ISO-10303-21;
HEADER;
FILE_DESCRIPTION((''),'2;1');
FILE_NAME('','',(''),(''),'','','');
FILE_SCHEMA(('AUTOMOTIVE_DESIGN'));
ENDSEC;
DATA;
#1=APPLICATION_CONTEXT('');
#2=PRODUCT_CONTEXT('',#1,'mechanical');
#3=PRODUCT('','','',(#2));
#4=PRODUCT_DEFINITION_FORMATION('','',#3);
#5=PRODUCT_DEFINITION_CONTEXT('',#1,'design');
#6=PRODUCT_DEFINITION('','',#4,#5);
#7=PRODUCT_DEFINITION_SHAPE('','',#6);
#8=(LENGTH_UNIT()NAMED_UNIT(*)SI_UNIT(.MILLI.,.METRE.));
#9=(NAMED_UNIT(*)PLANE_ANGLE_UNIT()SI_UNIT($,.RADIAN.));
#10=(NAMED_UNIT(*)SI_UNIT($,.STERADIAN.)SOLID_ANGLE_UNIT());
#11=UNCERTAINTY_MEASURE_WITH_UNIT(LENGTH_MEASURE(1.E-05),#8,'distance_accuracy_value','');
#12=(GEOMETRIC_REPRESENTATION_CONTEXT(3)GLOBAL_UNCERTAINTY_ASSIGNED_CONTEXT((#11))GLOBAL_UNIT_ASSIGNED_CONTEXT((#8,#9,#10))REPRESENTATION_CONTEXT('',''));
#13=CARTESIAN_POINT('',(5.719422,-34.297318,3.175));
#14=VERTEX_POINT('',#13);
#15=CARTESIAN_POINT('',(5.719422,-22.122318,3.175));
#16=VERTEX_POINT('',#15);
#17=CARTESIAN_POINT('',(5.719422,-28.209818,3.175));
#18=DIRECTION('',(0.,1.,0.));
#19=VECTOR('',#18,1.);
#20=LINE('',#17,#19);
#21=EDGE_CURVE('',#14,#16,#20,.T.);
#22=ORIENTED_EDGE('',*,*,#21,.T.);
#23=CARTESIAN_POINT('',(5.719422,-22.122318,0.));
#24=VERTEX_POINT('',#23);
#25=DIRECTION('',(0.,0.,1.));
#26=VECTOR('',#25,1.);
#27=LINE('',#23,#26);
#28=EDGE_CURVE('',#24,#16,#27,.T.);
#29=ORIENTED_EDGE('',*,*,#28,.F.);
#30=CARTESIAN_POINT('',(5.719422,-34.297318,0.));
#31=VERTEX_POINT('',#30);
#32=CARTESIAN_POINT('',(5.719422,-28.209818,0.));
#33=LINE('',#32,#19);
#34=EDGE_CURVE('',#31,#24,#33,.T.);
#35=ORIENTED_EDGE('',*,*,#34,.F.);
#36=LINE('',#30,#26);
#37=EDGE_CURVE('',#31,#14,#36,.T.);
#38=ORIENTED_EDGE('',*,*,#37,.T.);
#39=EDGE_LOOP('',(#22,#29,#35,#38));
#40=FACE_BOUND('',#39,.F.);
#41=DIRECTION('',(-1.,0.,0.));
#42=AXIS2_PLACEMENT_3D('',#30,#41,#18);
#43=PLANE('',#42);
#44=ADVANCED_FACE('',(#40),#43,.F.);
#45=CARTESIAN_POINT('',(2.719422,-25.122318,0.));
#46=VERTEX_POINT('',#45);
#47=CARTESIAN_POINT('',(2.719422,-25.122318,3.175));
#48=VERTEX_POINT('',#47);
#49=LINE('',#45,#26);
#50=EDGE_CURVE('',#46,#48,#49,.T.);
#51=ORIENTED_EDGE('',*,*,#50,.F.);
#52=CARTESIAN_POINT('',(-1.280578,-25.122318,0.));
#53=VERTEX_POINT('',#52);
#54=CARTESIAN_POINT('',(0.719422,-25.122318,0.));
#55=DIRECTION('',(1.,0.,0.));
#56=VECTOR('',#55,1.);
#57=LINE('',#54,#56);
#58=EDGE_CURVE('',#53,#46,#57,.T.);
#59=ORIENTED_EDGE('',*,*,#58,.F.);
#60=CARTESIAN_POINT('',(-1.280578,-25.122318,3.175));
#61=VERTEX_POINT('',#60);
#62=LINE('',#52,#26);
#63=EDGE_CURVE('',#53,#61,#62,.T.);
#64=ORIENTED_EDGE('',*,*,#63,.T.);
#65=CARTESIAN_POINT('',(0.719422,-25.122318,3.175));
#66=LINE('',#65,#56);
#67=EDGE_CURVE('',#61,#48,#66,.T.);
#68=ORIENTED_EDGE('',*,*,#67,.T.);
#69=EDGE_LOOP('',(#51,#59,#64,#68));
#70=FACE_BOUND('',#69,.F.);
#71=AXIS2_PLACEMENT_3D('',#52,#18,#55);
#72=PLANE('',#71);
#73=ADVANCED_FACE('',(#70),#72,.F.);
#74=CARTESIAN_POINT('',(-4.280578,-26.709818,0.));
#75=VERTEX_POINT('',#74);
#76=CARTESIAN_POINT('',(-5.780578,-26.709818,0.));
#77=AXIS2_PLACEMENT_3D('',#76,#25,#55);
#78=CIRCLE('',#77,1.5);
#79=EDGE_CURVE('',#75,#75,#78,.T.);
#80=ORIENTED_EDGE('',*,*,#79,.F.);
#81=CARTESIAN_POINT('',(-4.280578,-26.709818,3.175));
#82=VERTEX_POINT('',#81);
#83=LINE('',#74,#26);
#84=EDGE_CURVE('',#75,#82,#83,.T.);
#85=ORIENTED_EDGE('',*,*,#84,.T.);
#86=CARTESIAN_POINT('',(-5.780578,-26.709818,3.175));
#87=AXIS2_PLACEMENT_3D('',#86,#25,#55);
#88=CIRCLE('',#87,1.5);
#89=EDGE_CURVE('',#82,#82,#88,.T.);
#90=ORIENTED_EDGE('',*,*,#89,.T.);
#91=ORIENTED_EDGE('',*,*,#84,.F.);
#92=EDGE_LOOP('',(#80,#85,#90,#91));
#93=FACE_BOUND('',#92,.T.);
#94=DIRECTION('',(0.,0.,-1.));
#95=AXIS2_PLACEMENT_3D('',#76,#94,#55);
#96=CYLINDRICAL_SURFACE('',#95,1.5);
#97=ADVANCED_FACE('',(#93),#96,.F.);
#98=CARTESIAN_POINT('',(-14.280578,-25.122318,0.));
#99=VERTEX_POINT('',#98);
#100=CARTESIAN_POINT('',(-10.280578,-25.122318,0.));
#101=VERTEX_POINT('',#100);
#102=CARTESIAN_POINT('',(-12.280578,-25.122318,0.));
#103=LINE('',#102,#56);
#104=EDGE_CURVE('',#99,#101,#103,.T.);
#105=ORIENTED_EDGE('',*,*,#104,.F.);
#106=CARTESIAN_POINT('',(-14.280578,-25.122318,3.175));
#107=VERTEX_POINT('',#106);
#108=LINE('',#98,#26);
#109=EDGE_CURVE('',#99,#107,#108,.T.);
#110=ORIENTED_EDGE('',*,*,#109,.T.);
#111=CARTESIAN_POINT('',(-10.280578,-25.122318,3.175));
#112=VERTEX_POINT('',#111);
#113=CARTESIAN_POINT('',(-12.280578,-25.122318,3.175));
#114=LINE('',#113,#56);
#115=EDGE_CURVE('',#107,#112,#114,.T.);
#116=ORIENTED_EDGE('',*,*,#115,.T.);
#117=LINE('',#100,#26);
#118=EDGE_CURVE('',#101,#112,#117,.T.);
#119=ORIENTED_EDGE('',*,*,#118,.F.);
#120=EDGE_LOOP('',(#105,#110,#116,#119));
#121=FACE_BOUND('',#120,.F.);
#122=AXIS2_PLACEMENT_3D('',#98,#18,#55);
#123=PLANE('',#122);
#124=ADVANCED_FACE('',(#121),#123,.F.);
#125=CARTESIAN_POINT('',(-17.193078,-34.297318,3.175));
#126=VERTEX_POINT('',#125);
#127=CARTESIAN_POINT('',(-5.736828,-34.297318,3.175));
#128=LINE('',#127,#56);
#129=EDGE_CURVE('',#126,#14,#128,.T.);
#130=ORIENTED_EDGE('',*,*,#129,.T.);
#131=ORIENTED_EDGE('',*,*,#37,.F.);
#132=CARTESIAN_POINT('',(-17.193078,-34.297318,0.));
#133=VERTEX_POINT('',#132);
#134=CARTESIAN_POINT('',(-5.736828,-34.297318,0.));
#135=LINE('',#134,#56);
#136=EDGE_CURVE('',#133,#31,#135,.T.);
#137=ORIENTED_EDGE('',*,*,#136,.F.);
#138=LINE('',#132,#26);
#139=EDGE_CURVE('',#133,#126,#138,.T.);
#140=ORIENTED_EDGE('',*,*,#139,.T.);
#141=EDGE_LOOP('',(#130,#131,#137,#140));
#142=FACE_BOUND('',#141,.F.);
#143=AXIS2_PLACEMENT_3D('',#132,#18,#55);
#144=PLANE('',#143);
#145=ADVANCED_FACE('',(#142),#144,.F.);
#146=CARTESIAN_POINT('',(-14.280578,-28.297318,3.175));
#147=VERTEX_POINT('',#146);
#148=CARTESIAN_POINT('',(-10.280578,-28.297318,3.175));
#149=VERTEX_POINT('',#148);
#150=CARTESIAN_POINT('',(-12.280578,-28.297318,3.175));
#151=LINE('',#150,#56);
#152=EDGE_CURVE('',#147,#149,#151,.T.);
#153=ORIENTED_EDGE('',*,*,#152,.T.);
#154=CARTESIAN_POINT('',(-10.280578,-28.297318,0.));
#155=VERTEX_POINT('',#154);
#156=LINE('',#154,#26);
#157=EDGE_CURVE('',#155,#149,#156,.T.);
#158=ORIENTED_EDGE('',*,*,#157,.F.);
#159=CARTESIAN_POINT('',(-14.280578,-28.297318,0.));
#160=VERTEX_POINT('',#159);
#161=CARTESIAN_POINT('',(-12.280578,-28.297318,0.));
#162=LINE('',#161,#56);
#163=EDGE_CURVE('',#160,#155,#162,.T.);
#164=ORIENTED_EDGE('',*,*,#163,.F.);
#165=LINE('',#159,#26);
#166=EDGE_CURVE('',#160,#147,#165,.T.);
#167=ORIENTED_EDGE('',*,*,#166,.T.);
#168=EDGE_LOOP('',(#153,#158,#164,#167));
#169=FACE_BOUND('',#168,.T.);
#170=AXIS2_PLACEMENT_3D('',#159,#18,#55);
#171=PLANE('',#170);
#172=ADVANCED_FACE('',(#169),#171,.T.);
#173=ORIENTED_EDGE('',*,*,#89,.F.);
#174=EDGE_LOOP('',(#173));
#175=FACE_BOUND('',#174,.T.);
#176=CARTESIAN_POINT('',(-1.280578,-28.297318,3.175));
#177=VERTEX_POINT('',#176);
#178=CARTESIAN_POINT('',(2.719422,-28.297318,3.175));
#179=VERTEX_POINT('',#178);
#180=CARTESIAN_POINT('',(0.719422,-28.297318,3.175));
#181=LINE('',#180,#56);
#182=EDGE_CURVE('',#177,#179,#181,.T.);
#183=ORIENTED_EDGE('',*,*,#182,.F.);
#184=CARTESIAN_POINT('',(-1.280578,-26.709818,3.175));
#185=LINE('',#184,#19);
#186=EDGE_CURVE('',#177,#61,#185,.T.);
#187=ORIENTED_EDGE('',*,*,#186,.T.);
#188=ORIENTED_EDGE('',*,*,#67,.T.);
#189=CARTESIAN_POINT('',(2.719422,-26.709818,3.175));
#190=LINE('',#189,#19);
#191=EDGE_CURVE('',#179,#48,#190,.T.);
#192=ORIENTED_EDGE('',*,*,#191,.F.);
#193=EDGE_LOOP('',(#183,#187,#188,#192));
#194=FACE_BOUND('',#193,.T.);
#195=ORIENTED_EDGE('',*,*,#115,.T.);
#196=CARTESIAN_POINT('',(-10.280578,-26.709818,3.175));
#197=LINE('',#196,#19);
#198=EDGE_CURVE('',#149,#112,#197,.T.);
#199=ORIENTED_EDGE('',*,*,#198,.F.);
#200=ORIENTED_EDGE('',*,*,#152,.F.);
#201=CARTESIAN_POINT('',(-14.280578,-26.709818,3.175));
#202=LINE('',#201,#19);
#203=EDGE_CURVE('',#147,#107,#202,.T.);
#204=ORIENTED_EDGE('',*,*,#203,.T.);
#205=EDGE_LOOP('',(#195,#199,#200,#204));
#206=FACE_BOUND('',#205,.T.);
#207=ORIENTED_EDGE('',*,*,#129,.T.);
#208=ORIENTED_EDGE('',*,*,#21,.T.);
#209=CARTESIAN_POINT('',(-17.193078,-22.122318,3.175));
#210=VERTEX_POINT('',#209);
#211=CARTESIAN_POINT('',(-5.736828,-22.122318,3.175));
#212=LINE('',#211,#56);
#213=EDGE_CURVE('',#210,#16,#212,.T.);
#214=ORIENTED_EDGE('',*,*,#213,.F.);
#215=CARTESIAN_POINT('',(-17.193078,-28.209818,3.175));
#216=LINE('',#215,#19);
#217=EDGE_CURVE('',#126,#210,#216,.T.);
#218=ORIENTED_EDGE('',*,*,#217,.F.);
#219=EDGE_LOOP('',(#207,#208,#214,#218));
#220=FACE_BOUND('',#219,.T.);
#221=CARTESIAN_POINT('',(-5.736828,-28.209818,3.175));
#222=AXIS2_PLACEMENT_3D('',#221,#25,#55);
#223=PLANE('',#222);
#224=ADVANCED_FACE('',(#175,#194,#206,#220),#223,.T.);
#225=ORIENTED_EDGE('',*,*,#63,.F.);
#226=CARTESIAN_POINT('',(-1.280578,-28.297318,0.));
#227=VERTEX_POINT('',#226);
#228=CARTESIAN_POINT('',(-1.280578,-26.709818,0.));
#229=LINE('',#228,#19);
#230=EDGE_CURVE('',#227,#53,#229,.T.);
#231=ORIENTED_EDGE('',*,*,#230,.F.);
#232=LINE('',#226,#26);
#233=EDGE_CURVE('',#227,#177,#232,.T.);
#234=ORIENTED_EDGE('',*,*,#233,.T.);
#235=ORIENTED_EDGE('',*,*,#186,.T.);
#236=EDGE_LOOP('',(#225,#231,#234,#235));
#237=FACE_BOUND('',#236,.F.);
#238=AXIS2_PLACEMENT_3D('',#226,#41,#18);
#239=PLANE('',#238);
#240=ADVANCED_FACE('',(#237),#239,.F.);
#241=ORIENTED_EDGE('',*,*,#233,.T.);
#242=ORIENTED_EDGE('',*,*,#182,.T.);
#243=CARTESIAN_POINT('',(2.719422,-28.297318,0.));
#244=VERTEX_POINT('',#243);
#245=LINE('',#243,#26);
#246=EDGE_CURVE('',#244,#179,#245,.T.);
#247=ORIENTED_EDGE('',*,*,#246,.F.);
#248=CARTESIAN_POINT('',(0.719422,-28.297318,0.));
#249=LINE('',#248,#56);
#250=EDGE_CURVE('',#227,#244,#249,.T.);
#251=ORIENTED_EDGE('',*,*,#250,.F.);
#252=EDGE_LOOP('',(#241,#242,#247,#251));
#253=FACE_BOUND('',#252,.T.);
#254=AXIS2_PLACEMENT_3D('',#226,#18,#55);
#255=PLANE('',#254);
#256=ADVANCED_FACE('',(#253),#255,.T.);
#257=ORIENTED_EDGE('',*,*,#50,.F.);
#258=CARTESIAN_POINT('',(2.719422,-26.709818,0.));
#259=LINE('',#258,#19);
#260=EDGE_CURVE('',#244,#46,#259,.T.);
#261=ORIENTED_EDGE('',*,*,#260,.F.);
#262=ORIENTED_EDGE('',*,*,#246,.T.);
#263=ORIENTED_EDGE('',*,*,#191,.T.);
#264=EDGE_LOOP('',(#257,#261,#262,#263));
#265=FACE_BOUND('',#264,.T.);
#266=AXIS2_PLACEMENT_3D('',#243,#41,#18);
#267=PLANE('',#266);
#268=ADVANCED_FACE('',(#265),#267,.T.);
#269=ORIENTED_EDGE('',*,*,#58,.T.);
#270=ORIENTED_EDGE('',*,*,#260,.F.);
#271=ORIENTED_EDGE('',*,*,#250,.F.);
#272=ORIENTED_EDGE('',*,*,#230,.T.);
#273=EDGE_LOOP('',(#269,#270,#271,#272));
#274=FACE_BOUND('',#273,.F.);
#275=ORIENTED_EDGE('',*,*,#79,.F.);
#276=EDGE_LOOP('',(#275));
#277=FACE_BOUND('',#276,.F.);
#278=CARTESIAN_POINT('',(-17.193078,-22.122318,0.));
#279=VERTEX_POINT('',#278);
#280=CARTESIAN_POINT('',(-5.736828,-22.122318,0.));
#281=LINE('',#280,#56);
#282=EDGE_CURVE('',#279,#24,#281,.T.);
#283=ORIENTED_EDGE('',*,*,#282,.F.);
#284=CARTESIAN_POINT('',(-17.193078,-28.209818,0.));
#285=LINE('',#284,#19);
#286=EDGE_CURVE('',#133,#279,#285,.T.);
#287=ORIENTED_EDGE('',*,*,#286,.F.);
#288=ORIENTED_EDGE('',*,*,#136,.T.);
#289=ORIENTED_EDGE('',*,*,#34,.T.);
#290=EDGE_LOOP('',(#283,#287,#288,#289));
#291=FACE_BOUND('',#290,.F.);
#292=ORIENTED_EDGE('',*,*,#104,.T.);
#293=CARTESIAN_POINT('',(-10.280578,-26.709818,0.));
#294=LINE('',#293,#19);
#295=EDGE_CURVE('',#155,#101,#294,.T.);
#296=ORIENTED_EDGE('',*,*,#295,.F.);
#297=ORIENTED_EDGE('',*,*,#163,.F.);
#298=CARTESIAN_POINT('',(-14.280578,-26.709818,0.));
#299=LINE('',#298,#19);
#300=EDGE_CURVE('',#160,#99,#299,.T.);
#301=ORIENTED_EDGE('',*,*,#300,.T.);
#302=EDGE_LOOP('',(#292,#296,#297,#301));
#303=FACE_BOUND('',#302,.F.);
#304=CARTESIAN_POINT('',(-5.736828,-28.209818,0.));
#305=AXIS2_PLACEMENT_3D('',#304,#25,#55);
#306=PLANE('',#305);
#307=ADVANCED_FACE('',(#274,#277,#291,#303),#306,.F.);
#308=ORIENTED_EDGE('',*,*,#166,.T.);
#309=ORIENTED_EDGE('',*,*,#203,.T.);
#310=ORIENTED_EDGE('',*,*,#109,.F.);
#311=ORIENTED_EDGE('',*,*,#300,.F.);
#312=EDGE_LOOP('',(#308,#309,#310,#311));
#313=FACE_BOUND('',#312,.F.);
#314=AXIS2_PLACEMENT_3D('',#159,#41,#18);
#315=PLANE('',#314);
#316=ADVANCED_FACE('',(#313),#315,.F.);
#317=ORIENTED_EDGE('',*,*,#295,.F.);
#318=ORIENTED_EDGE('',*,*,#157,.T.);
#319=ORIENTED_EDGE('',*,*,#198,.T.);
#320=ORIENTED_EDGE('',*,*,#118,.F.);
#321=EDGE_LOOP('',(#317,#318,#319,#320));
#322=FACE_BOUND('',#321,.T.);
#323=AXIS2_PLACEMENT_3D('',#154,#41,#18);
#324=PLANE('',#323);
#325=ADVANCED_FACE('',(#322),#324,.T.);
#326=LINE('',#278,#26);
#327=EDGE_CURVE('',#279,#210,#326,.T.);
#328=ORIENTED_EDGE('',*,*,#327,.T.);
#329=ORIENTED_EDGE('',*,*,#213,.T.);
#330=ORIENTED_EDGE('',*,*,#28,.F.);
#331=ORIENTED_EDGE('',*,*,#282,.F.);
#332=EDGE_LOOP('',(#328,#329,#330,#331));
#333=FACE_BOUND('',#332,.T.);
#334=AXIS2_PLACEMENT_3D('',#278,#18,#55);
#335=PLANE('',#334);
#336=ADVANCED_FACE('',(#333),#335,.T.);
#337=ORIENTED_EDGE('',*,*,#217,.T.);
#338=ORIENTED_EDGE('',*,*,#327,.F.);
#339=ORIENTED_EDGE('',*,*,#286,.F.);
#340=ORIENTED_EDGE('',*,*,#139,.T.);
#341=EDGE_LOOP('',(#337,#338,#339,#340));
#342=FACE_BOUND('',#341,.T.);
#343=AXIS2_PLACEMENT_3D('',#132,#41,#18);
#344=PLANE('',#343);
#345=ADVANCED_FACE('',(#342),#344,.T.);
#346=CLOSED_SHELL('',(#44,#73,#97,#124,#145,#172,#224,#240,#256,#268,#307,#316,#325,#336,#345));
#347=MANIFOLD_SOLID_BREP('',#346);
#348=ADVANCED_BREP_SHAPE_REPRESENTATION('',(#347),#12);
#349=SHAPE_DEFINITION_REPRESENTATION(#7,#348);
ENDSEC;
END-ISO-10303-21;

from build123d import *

# Parameters (mm, degrees)
F0_W     = 22.9125
F0_H     = 12.175
F0_W_2   = 4
F0_H_2   = 3.175
F0_R     = 1.5
F1_DEPTH = 3.175


# Not quite as in the source:
# - a length typed as a fraction of an inch, garbled in the dataset ("3 / 203.2 mm" for 3/8 in), is restored


with BuildPart() as f1:
    # F0 (on Top) → F1 (new body)
    with BuildSketch(Plane.XY):
        with Locations((-5.7368283796, -28.2098180865)):
            Rectangle(F0_W, F0_H)
        with Locations((-12.2805783796, -26.7098180865)):
            Rectangle(F0_W_2, F0_H_2, mode=Mode.SUBTRACT)
        with Locations((-5.7805783796, -26.7098180865)):
            Circle(F0_R, mode=Mode.SUBTRACT)
        with Locations((0.7194216204, -26.7098180865)):
            Rectangle(F0_W_2, F0_H_2, mode=Mode.SUBTRACT)
    extrude(amount=F1_DEPTH)


solid = f1.part
